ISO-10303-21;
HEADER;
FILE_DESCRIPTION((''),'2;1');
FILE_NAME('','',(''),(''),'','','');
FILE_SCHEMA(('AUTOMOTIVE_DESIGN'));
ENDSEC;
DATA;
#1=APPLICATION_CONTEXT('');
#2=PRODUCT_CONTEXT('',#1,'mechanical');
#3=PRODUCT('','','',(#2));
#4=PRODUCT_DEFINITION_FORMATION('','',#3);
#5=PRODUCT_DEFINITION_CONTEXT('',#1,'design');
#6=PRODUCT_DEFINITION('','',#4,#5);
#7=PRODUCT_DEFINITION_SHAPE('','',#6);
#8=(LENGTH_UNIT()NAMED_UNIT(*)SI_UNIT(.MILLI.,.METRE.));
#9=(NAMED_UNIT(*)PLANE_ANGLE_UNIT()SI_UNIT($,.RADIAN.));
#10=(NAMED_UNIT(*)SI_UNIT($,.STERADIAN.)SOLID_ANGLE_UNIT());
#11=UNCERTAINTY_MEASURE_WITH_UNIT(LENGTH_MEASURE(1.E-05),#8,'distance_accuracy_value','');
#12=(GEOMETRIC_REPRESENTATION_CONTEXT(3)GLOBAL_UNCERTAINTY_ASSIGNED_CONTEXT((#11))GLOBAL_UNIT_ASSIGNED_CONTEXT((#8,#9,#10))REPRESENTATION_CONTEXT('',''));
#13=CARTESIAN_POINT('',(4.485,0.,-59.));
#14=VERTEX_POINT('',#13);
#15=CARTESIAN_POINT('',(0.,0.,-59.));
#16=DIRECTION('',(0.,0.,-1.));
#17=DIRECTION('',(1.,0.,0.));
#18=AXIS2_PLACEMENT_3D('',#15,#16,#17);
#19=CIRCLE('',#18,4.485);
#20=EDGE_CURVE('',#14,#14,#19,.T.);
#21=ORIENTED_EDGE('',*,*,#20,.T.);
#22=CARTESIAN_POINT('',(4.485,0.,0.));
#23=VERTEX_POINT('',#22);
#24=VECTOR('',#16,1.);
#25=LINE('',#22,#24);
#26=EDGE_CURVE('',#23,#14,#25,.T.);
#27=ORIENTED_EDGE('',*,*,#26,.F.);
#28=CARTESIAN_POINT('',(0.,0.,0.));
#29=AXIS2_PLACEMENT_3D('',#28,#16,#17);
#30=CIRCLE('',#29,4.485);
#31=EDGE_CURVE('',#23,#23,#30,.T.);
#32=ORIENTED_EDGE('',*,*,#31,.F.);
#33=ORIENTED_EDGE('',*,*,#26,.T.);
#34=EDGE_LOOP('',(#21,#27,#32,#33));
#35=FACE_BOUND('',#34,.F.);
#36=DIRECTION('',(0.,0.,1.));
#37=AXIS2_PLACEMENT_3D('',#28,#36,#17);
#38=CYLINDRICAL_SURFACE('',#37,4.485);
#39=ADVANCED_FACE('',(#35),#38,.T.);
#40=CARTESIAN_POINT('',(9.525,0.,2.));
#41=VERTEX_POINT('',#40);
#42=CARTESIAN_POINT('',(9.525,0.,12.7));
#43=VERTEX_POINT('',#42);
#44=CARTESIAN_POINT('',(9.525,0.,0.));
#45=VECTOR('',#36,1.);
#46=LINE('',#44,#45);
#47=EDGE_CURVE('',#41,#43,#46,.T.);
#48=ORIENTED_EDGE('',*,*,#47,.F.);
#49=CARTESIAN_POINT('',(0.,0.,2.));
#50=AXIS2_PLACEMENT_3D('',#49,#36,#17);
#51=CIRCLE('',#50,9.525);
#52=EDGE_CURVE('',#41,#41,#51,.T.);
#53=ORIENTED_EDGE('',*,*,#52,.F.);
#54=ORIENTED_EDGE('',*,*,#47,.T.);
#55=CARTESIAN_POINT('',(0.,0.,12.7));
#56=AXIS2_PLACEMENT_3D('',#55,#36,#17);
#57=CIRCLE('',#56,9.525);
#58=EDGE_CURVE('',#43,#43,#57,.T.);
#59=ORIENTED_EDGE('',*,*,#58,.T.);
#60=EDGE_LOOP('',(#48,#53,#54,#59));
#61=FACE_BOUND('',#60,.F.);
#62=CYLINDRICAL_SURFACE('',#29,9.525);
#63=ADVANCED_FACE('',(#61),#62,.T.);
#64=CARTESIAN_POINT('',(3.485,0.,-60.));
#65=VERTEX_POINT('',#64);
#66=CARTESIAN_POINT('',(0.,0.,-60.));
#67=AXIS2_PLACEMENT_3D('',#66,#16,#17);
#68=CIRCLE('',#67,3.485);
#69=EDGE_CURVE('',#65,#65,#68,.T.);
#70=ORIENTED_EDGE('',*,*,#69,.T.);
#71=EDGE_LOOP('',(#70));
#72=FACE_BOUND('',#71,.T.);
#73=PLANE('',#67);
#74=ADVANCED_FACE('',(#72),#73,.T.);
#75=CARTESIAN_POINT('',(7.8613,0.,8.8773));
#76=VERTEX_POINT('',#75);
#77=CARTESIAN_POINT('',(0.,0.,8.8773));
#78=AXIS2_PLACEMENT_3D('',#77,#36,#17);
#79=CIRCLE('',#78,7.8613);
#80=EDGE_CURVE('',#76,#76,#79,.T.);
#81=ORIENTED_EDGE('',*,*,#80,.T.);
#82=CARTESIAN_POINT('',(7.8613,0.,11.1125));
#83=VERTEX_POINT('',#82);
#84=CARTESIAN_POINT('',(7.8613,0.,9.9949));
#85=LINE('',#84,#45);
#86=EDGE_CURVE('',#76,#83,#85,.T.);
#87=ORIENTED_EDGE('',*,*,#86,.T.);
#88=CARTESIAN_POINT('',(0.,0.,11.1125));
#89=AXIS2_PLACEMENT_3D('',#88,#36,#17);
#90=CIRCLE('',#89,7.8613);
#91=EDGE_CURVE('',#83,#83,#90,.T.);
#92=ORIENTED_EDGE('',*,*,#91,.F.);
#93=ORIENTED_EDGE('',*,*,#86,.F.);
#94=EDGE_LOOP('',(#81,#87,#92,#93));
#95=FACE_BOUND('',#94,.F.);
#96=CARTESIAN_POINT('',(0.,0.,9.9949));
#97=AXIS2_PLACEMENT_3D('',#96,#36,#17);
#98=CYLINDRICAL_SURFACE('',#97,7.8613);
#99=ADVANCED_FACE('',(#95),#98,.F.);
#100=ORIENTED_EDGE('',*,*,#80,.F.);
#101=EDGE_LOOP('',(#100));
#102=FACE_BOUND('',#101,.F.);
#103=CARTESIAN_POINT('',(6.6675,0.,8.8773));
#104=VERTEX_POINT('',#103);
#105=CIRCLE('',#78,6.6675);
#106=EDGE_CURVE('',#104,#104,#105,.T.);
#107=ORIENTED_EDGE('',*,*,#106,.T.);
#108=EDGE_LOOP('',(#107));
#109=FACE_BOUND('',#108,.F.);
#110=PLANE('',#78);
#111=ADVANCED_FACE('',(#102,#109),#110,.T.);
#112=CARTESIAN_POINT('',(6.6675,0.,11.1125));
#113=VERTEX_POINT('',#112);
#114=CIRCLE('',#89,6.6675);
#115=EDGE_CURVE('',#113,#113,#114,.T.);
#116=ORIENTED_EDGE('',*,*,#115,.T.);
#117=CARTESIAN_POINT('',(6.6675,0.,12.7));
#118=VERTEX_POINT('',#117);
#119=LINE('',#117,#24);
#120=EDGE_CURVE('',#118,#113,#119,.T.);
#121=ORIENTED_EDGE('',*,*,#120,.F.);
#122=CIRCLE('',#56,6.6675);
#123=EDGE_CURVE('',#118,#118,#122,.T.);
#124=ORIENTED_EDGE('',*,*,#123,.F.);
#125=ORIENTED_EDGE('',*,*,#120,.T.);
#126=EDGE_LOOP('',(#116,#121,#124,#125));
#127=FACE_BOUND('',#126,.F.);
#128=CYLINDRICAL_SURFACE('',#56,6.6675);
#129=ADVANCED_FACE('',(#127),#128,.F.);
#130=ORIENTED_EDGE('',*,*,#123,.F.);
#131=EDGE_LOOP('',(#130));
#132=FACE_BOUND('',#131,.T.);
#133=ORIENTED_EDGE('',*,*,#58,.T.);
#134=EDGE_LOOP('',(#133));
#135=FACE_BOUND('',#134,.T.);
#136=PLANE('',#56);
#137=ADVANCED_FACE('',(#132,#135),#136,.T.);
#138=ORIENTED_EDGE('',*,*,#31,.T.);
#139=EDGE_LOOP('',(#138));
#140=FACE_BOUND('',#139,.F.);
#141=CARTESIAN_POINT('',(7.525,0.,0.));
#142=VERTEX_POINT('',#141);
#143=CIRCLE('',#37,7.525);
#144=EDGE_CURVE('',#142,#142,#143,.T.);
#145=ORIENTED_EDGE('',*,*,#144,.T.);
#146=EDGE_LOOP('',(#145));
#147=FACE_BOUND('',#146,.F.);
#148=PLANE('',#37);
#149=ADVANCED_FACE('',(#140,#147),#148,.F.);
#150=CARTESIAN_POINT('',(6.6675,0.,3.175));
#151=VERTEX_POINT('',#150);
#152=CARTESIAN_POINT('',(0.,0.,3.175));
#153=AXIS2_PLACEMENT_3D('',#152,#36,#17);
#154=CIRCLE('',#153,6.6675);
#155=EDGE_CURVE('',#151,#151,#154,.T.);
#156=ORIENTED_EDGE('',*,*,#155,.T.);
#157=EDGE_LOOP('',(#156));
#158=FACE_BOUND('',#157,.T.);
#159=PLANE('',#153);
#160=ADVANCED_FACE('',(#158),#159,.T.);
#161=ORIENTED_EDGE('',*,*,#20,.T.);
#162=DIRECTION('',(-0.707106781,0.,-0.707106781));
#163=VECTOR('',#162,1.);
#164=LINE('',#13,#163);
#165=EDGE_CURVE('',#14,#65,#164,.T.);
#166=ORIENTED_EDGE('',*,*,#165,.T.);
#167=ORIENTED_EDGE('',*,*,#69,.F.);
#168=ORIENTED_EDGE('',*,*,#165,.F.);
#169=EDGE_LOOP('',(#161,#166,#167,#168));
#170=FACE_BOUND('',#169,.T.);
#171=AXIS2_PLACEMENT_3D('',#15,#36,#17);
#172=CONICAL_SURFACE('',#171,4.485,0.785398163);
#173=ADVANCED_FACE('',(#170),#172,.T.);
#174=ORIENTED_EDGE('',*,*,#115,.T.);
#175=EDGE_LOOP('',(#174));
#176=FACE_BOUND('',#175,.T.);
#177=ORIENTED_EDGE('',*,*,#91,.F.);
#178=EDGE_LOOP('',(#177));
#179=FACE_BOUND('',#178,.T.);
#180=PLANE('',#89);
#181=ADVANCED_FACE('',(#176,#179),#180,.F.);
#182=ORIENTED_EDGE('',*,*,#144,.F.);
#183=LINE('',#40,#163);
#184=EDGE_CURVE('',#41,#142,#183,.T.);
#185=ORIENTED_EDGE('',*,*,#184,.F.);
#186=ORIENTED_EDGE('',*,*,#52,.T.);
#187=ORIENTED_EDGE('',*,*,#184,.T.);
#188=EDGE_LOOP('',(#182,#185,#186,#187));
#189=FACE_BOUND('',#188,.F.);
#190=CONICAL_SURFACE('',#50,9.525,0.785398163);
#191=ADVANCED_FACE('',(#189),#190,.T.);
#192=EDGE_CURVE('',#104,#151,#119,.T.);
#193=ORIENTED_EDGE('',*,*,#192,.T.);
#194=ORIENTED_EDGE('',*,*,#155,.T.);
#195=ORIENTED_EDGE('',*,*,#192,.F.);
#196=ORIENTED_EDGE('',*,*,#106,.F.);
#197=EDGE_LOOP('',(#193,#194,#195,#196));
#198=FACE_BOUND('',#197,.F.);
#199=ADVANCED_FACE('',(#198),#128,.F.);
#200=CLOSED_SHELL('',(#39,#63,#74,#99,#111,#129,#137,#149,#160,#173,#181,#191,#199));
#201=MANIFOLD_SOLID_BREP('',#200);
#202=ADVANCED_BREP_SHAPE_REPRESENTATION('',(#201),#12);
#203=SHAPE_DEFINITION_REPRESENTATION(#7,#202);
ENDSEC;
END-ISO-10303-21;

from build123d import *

# Parameters (mm, degrees)
F0_R     = 9.525
F1_DEPTH = 12.7
F2_R     = 6.6675
F3_DEPTH = 9.525
F4_W     = 1.1938
F4_H     = 2.2352
F7_SIZE  = 2
F8_R     = 4.485
F9_DEPTH = 60
F10_SIZE = 1


# Not quite as in the source:
# - the program builds the solid bodies; features that only make, move or delete a surface that nothing else refers to are left out


with BuildPart() as f1:
    # F0 (on Top) → F1 (new body)
    with BuildSketch(Plane.XY):
        Circle(F0_R)
    extrude(amount=F1_DEPTH)

    # F2 (on face) → F3 (cut)
    with BuildSketch(Plane.XY.offset(12.7)):
        Circle(F2_R)
    extrude(amount=-F3_DEPTH, mode=Mode.SUBTRACT)

    # F4 (on Front) → F5 (revolve, cut)
    with BuildSketch(Plane.XZ):
        with Locations((7.2644, 9.9949)):
            Rectangle(F4_W, F4_H)
    revolve(axis=Axis((0, 0, 19.0221574157), (0, 0, 1)), mode=Mode.SUBTRACT)

    # F7
    f7_edges = [f1.edges().sort_by_distance(p)[0] for p in [
        (-9.525, 0, 0),
    ]]
    chamfer(f7_edges, length=F7_SIZE)

    # F8 (on face) → F9 (join)
    with BuildSketch(Plane(origin=(0, 0, 0), x_dir=(1, 0, 0), z_dir=(0, 0, -1))):
        Circle(F8_R)
    extrude(amount=F9_DEPTH)

    # F10
    f10_edges = [f1.edges().sort_by_distance(p)[0] for p in [
        (-4.485, 0, -60),
    ]]
    chamfer(f10_edges, length=F10_SIZE)


solid = f1.part
